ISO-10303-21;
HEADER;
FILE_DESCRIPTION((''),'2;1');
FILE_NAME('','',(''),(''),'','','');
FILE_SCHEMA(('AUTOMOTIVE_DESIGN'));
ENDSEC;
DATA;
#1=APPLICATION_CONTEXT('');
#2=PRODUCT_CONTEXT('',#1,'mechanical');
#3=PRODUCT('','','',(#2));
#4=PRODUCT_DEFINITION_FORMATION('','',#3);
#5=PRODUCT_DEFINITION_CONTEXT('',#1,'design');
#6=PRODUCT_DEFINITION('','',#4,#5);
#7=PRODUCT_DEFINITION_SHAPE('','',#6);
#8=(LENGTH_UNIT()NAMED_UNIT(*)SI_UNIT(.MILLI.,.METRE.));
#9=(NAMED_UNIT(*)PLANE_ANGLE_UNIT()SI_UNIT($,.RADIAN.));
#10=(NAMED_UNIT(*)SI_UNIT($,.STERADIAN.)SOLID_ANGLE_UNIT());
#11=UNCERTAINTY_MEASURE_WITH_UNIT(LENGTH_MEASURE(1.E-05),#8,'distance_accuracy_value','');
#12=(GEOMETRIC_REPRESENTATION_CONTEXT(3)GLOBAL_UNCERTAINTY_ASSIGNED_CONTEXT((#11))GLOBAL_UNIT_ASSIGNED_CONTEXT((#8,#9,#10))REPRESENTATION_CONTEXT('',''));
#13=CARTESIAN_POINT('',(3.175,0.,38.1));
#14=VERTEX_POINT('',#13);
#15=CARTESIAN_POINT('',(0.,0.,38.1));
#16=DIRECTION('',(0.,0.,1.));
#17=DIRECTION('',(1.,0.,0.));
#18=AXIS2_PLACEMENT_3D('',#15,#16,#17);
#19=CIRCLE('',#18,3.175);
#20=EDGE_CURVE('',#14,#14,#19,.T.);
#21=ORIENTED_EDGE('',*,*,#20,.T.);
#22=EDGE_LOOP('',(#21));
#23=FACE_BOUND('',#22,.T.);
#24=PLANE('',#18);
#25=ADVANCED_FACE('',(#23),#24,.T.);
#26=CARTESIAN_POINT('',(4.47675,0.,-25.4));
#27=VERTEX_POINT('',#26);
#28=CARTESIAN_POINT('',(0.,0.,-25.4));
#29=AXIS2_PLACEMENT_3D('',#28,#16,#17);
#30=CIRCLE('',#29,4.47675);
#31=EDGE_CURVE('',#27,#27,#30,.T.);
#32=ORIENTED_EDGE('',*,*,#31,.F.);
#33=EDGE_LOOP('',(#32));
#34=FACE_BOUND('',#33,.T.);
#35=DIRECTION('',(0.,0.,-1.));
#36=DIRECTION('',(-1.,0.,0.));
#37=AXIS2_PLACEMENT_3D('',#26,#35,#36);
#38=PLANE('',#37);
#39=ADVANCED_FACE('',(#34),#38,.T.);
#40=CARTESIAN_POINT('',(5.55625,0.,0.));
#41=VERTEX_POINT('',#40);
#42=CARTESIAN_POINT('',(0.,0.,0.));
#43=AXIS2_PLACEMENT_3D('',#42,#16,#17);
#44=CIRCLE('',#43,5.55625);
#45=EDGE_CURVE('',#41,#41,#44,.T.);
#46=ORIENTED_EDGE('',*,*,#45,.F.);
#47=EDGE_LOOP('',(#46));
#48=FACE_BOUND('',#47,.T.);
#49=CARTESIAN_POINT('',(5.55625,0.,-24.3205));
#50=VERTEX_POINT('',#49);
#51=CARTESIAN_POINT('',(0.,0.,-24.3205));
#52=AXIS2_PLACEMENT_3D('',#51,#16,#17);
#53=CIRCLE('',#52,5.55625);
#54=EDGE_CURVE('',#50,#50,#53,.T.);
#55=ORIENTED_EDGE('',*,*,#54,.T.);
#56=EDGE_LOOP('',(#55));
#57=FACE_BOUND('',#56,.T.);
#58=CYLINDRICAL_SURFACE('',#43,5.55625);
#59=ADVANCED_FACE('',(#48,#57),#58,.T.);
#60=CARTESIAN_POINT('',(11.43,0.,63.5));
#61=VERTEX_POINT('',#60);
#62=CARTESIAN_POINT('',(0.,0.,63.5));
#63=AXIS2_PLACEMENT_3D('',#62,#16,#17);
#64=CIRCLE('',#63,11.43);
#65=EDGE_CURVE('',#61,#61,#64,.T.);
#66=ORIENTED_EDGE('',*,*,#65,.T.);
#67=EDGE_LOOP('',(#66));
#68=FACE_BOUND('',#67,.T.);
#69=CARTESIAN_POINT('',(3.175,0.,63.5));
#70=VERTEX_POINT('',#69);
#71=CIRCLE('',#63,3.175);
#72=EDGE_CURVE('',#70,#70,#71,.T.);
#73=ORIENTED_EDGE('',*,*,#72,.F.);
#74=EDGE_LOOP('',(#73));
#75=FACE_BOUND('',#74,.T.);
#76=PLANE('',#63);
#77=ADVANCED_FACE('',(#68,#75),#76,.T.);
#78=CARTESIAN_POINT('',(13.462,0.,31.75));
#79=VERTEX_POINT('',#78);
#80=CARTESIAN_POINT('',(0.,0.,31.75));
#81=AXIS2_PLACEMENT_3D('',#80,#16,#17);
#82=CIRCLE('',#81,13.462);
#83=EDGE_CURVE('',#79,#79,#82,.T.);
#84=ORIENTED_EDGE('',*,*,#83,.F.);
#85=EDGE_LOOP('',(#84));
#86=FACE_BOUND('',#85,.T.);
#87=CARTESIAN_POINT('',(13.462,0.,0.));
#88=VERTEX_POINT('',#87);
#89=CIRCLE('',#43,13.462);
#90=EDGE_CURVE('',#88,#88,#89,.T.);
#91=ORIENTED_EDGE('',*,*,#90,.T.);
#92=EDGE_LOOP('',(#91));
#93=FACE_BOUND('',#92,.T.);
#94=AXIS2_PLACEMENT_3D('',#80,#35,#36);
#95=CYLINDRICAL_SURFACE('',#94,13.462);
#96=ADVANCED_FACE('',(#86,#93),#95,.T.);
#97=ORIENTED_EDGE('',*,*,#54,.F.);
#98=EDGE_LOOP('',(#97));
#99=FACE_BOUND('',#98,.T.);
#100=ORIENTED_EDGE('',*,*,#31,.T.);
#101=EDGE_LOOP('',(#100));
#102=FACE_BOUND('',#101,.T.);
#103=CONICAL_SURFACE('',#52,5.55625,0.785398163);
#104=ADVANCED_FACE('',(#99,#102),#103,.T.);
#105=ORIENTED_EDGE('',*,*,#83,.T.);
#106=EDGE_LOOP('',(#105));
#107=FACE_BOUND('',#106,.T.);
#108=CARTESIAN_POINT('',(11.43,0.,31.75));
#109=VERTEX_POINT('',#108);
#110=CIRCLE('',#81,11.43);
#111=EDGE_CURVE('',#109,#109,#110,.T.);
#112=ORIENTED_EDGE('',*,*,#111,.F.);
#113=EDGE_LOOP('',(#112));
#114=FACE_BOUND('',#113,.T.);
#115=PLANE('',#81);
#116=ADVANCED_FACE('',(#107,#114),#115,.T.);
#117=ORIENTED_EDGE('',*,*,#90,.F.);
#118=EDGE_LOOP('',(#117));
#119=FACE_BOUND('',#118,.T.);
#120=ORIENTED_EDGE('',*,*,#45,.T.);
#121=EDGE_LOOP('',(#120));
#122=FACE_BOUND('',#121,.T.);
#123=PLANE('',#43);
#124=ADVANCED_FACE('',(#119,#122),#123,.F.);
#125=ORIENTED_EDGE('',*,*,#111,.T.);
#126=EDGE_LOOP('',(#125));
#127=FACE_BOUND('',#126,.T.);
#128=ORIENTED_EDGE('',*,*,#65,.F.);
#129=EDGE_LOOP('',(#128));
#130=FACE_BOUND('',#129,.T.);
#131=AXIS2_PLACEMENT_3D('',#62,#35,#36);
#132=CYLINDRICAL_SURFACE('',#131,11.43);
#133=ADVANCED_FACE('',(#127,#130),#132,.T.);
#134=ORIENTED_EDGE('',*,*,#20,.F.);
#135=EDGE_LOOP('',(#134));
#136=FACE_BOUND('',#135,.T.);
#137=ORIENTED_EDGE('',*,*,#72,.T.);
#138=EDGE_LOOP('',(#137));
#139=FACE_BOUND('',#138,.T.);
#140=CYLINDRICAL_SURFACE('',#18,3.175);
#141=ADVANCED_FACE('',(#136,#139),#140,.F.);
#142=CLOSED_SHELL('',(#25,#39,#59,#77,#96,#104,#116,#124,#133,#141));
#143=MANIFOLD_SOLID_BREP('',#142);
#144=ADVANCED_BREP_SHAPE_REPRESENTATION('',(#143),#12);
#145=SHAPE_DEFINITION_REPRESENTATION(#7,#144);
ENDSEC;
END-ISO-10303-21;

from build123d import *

# Parameters (mm, degrees)
SKETCH1_R           = 13.462
BOSS_EXTRUDE1_DEPTH = 31.75
SKETCH2_R           = 11.43
BOSS_EXTRUDE2_DEPTH = 31.75
SKETCH3_R           = 3.175
CUT_EXTRUDE1_DEPTH  = 25.4


# Read off the part's stored shape, not the designer's step: 7/16-14 Machine Threads Stud1
with BuildPart() as part:
    # Sketch1 → Boss-Extrude1 (new body)
    with BuildSketch(Plane.XY):
        Circle(SKETCH1_R)
    extrude(amount=BOSS_EXTRUDE1_DEPTH)

    # Sketch2 → Boss-Extrude2 (add)
    with BuildSketch(Plane.XY.offset(31.75)):
        Circle(SKETCH2_R)
    extrude(amount=BOSS_EXTRUDE2_DEPTH)

    # Sketch3 → Cut-Extrude1 (cut)
    with BuildSketch(Plane.XY.offset(63.5)):
        Circle(SKETCH3_R)
    extrude(amount=-CUT_EXTRUDE1_DEPTH, mode=Mode.SUBTRACT)

    # 7/16-14 Machine Threads Stud1 outline → 7/16-14 Machine Threads Stud1 (revolve)
    with BuildSketch(Plane.XZ):
        Polygon((0, 0), (0, -25.4), (4.47675, -25.4), (5.55625, -24.3205), (5.55625, 0), align=None)
    revolve(axis=Axis((0, 0, 0), (0, 0, 1)))


solid = part.part
